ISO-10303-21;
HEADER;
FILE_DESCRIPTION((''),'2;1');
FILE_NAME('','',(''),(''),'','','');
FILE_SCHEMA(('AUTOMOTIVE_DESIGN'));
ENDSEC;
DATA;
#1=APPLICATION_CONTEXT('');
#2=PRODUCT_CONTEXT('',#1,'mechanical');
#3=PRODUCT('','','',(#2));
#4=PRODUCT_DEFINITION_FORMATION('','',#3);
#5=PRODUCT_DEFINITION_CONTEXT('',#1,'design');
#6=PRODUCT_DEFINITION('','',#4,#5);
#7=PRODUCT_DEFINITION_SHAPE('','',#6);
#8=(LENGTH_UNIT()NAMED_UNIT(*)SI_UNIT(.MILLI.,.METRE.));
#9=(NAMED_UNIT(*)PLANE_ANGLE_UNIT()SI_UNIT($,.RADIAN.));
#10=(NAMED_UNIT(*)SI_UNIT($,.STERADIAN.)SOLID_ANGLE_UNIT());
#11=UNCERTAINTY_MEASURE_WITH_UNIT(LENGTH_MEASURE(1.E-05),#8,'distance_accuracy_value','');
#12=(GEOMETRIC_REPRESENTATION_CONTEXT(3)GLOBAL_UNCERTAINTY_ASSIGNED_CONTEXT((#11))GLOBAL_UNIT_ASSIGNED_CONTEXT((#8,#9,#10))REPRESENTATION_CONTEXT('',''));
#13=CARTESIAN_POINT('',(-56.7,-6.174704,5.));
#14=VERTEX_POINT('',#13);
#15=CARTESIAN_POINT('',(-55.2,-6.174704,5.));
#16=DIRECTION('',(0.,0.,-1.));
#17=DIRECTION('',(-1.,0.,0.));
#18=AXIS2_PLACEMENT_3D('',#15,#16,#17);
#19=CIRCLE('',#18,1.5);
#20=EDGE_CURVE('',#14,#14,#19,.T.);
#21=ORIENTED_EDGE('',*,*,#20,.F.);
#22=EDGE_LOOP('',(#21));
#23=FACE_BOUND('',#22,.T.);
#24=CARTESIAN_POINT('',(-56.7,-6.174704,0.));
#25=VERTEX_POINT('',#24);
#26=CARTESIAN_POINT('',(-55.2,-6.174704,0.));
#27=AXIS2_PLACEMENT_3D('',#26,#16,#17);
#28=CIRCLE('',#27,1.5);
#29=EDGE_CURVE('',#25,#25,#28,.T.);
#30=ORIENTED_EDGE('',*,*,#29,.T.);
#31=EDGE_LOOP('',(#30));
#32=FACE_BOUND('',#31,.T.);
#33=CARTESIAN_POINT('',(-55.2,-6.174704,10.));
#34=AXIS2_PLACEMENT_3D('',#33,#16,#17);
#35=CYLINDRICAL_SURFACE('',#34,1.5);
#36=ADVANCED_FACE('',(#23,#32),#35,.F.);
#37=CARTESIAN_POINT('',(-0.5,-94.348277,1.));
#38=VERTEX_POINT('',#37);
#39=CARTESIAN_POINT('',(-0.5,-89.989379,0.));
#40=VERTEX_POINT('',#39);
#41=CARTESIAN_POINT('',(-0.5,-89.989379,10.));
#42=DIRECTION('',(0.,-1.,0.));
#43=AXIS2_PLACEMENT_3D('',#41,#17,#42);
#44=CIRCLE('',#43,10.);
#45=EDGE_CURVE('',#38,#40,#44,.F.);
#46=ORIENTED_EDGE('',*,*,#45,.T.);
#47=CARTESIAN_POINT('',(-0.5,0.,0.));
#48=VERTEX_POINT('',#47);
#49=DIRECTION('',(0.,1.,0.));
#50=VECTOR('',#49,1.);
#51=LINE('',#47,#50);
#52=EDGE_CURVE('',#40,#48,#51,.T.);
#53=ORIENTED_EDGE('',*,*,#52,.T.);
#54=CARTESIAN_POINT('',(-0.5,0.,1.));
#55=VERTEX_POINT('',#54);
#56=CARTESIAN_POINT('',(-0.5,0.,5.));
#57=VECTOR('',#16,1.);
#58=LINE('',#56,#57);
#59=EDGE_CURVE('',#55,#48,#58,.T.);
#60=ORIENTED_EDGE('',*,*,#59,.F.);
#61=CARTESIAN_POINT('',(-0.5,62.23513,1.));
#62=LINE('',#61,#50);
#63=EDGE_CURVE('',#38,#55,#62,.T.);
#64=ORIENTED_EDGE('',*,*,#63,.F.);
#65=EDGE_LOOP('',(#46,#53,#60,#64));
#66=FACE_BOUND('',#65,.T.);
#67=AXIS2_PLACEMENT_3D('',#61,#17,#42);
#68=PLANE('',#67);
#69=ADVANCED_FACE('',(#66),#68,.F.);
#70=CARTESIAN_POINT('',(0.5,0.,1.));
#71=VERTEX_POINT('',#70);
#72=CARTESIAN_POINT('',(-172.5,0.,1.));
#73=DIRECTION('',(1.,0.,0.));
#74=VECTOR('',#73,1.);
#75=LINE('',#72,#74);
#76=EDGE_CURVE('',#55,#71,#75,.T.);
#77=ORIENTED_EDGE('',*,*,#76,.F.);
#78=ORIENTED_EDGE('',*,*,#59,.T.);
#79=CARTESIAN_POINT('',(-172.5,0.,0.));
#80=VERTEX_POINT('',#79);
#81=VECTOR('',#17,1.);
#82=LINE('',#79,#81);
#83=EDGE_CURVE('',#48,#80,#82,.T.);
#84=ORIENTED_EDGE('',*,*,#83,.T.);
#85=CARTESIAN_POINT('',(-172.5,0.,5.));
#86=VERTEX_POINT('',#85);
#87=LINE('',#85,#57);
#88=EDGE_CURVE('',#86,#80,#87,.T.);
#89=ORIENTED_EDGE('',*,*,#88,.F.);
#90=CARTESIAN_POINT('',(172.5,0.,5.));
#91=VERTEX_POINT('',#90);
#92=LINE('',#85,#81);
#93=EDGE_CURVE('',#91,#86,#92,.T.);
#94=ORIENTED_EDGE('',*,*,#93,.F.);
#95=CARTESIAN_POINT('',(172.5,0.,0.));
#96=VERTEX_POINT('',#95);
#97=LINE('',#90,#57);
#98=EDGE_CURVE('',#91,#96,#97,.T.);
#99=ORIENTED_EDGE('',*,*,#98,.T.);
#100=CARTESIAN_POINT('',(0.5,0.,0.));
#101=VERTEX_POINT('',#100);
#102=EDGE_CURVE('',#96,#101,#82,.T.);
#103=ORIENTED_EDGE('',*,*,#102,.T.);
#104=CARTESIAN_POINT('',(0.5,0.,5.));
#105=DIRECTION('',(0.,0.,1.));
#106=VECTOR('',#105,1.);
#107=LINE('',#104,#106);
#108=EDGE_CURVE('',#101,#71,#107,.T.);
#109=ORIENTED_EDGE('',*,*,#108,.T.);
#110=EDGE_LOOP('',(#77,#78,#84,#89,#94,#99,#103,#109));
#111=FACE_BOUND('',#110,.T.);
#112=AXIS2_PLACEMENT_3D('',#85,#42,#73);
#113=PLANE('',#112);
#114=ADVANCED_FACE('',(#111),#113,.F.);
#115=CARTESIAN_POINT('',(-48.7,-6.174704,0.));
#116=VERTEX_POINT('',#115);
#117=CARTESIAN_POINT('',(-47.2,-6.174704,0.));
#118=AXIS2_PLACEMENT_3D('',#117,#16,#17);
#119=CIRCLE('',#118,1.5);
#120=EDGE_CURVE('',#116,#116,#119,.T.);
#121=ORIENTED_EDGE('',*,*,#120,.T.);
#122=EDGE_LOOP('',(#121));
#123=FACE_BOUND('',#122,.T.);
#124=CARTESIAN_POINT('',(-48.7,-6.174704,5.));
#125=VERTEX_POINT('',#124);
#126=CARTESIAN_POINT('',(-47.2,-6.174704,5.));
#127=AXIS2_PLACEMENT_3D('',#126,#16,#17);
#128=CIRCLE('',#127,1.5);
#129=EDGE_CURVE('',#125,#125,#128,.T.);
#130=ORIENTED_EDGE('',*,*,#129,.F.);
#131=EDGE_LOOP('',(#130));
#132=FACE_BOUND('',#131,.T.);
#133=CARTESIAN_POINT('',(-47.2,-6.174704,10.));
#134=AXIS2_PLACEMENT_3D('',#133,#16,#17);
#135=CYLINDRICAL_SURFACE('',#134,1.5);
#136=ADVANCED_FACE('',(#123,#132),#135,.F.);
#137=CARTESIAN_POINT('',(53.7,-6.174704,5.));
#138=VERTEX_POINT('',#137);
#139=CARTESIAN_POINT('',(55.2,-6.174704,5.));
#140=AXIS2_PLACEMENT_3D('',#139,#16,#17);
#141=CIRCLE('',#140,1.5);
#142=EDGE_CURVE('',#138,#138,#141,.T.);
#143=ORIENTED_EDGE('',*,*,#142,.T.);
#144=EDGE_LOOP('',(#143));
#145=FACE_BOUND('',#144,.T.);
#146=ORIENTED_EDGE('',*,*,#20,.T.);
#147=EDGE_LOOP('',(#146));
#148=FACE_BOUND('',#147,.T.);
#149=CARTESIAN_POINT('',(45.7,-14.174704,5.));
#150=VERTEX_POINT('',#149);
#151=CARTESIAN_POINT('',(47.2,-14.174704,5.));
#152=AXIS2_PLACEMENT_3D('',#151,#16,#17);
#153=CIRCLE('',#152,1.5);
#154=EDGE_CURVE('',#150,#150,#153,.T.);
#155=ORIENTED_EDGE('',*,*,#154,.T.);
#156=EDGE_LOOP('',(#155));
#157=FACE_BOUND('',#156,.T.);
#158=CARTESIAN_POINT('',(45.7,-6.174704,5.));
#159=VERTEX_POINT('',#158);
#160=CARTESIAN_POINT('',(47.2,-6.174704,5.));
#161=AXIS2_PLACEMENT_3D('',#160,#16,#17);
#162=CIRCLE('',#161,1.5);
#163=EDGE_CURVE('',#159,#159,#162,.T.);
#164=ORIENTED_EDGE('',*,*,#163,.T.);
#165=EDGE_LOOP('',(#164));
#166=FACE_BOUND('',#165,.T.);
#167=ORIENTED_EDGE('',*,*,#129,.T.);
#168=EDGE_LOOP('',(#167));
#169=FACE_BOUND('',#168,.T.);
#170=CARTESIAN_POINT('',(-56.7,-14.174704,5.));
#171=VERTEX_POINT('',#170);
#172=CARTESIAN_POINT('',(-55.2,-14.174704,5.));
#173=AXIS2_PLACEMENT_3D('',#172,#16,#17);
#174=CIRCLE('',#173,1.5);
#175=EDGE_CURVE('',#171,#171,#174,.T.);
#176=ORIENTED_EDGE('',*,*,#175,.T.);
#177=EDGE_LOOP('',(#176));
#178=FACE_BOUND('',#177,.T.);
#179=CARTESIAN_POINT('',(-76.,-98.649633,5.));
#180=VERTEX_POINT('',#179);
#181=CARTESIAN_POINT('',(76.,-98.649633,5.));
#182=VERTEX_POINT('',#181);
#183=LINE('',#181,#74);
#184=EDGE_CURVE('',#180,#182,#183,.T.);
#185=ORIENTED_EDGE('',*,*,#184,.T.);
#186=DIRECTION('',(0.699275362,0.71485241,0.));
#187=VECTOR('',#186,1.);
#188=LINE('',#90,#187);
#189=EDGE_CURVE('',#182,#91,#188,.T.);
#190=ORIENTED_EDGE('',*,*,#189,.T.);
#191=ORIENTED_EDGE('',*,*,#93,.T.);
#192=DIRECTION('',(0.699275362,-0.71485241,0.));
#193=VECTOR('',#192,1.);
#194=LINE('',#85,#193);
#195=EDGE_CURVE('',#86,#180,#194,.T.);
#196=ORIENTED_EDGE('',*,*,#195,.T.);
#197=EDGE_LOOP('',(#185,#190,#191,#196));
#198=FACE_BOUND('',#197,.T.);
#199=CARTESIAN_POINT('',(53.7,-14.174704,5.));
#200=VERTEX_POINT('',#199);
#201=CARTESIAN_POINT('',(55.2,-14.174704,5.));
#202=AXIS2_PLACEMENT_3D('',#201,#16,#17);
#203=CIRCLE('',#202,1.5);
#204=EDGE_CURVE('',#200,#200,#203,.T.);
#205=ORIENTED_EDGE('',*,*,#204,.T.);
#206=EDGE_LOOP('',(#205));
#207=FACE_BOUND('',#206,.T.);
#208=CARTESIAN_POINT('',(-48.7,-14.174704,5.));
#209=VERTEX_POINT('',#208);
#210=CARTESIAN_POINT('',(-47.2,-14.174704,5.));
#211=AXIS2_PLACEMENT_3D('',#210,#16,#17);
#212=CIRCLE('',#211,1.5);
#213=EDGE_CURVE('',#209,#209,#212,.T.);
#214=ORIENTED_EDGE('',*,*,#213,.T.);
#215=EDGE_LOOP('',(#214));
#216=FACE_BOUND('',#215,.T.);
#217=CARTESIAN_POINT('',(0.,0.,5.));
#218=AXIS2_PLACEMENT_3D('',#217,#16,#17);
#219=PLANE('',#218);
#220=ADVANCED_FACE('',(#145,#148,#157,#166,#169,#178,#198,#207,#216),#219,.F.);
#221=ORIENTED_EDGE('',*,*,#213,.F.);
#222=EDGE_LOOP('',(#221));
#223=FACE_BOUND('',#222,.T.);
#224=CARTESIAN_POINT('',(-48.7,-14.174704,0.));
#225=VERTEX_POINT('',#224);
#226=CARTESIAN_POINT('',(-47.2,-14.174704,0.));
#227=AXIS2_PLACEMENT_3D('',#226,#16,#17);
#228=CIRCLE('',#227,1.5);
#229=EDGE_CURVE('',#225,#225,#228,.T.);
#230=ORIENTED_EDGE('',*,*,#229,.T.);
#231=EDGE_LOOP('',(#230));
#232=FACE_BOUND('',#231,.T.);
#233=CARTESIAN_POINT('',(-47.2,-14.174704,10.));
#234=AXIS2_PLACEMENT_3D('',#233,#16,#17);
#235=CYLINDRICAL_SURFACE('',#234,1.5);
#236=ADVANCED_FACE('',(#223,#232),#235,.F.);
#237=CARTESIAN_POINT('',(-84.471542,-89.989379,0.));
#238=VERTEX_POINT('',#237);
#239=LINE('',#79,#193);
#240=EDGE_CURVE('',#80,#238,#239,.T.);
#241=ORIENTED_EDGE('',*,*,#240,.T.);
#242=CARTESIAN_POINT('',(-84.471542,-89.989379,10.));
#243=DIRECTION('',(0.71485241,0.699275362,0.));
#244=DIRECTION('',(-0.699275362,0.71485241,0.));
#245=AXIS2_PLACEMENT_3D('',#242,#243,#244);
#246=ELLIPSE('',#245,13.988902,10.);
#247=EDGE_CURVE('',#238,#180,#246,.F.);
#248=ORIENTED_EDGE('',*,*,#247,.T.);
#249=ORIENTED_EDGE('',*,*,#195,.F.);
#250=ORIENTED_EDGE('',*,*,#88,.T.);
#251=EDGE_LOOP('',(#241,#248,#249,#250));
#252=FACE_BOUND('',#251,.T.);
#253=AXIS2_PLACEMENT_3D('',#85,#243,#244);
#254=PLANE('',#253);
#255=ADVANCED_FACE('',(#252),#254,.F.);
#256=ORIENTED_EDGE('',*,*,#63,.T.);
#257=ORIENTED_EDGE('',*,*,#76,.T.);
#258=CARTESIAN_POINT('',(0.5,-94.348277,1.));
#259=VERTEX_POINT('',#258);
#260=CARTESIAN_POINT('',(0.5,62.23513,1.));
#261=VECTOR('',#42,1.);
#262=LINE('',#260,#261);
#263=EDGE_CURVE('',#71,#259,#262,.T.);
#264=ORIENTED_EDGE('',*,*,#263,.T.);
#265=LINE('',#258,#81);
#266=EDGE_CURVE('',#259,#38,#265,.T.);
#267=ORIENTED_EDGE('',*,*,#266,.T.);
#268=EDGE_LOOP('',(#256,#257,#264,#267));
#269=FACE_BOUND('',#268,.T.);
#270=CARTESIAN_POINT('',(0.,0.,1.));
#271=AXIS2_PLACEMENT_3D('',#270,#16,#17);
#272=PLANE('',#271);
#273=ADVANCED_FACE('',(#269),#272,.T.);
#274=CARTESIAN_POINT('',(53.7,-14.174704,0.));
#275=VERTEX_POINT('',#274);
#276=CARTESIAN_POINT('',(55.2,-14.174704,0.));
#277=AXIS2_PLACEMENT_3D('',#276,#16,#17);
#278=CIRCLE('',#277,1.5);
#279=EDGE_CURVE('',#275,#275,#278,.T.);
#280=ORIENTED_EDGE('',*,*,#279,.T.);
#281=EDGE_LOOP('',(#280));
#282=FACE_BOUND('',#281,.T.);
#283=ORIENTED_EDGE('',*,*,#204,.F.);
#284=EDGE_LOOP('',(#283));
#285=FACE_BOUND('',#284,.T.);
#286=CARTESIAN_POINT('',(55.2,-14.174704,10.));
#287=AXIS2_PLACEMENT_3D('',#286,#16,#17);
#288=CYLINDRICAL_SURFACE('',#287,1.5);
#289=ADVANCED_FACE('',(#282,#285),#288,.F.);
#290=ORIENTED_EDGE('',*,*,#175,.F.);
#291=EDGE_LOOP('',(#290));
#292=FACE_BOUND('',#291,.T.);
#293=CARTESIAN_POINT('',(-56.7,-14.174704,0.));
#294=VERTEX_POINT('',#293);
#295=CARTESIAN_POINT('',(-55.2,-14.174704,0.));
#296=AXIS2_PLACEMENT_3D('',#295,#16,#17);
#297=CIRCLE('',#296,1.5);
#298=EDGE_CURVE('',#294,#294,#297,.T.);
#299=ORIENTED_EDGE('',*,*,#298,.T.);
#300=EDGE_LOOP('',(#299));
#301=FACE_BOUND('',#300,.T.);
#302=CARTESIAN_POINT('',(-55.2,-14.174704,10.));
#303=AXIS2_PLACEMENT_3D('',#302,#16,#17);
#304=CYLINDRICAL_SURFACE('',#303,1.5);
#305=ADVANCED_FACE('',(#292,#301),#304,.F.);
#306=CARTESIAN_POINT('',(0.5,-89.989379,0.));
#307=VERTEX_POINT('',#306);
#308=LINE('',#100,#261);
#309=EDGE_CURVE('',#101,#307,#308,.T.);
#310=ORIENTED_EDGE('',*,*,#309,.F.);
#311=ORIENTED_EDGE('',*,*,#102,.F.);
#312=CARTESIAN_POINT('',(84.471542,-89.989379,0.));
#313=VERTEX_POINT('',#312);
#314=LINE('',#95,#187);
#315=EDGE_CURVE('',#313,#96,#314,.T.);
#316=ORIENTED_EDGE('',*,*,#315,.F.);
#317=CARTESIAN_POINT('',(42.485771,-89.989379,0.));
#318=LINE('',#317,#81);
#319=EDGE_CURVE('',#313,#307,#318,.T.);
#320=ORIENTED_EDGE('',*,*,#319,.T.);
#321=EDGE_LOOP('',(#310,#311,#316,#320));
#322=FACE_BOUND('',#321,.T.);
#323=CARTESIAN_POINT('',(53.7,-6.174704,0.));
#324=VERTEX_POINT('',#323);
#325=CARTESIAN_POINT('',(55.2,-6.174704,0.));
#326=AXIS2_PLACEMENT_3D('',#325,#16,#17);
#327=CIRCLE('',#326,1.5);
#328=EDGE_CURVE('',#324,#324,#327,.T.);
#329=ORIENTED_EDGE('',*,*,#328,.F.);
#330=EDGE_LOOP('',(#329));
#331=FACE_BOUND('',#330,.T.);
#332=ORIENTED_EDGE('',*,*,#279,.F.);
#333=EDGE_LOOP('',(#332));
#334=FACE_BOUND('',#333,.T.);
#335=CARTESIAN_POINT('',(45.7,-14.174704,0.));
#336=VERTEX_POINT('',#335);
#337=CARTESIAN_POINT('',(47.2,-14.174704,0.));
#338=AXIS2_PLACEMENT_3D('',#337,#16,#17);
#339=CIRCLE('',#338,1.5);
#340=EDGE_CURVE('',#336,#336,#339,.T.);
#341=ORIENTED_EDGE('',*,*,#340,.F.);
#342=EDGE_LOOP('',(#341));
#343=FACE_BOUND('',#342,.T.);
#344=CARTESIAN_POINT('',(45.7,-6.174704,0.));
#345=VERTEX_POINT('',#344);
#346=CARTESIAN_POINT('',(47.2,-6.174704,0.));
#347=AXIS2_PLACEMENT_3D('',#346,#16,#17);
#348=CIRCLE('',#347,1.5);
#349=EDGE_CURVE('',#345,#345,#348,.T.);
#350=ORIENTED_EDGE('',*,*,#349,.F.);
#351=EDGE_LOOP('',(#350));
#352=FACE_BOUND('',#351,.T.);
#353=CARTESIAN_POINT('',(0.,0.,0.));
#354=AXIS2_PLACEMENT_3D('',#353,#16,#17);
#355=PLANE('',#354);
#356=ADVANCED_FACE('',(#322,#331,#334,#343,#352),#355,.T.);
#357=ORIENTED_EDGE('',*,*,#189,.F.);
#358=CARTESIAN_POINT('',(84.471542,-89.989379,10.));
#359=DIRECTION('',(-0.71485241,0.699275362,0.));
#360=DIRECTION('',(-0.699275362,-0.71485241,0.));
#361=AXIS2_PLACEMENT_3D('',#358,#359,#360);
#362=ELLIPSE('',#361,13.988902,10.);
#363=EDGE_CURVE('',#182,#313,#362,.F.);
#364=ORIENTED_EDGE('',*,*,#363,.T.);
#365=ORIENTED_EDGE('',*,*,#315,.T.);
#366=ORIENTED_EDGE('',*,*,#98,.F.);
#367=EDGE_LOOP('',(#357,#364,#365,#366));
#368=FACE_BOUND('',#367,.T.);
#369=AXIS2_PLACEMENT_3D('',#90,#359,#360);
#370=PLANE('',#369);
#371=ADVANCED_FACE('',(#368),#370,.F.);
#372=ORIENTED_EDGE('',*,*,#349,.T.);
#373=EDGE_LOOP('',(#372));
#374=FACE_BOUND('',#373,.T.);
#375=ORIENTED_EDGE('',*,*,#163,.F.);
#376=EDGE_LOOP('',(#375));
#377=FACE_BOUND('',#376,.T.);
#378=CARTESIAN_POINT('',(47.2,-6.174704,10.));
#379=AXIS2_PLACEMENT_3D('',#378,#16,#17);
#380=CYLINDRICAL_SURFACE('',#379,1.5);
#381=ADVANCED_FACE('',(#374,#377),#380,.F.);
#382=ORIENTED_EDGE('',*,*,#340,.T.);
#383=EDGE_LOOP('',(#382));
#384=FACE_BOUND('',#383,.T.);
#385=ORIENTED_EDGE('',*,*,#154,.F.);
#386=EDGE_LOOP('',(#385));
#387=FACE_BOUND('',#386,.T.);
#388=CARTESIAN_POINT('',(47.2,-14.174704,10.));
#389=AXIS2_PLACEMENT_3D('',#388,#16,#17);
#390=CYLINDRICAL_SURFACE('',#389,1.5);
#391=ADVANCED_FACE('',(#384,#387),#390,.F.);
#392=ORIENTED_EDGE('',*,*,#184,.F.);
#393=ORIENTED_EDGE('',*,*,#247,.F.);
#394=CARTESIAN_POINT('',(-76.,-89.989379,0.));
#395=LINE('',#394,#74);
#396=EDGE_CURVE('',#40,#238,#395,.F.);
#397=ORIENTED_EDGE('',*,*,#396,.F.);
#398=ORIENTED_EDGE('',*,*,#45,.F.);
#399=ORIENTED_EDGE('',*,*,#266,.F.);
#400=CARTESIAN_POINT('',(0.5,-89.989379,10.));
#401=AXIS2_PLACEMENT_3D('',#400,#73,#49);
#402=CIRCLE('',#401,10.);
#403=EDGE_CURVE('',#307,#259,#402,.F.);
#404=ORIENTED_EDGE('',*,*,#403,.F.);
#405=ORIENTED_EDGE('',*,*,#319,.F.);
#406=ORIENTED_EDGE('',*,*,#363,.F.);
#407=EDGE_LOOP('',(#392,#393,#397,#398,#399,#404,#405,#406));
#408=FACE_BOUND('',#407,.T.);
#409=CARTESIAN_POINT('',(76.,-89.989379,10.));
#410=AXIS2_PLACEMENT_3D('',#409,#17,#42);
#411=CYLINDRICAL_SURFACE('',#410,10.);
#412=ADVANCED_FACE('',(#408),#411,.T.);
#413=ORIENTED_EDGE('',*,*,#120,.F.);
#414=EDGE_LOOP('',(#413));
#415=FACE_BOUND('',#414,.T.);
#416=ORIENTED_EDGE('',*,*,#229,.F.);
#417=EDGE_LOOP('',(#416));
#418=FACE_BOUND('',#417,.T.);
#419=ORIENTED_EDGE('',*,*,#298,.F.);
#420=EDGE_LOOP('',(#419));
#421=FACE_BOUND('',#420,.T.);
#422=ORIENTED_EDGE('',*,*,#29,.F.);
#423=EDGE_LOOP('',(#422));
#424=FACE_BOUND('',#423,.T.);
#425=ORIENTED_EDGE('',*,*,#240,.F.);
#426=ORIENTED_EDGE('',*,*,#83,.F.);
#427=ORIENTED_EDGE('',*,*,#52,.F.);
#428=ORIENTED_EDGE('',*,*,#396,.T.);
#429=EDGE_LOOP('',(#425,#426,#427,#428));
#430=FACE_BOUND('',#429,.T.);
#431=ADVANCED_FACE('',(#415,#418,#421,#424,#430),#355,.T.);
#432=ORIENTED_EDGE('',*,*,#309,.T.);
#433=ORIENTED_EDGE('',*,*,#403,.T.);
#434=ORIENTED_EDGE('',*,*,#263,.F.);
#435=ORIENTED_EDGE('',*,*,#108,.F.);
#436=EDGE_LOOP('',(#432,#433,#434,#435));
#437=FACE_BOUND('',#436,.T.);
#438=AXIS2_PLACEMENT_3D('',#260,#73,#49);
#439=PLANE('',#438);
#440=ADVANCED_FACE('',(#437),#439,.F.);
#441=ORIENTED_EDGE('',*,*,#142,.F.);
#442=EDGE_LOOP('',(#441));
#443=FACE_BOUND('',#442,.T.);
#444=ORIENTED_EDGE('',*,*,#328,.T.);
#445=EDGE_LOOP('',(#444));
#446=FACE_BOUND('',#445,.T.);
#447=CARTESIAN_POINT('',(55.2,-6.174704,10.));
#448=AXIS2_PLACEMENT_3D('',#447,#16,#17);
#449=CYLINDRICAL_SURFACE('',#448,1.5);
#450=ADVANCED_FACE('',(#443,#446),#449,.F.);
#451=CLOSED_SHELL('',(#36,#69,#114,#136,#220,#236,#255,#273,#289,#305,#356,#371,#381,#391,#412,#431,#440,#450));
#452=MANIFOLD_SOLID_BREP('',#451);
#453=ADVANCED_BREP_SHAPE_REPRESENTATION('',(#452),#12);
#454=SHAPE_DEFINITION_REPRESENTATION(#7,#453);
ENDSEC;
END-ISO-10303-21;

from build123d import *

# Parameters (mm, degrees)
EXTRUDE_1_DEPTH     = 5
SKETCH_3_W          = 1
SKETCH_3_H          = 224.141744844
CUT_EXTRUDE_2_DEPTH = 1
FILLET_1_R          = 10
SKETCH_7_R          = 1.5
CUT_EXTRUDE_3_DEPTH = 10


with BuildPart() as part:
    # 草图1 → 凸台-拉伸1 (new body)
    with BuildSketch(Plane.XY):
        Polygon((-172.5, 0), (172.5, 0), (76, -98.649632539), (-76, -98.649632539), align=None)
    extrude(amount=EXTRUDE_1_DEPTH)

    # 草图3 → 切除-拉伸2 (cut)
    with BuildSketch(Plane(origin=(0, 0, 0), x_dir=(-1, 0, 0), z_dir=(0, 0, -1))):
        with Locations((0, -49.835742657)):
            Rectangle(SKETCH_3_W, SKETCH_3_H)
    extrude(amount=-CUT_EXTRUDE_2_DEPTH, mode=Mode.SUBTRACT)

    # 圆角1
    # the kernel refuses this fillet: 10 mm, written as the material it takes off along each edge
    with BuildSketch(Plane(origin=(97.650635095, -98.649632539, 0), x_dir=(0, 1, 0), z_dir=(-1, 0, 0)), Plane(origin=(21.150635095, -98.649632539, 0), x_dir=(0, 1, 0), z_dir=(-1, 0, 0))) as fillet_1_piece_1:
        with BuildLine():
            CenterArc((8.660254038, -10), FILLET_1_R, 90, 60)
            Line((0, -5), (0, 0))
            Line((0, 0), (8.660254038, 0))
        make_face()
    extrude(amount=118.801270189, mode=Mode.SUBTRACT)

    # 草图7 → 切除-拉伸3 (cut)
    with BuildSketch(Plane(origin=(0, 0, 0), x_dir=(-1, 0, 0), z_dir=(0, 0, -1))):
        with Locations((55.2, -14.174704167)):
            Circle(SKETCH_7_R)
        with Locations((47.2, -14.174704167)):
            Circle(SKETCH_7_R)
        with Locations((47.2, -6.174704167)):
            Circle(SKETCH_7_R)
        with Locations((55.2, -6.174704167)):
            Circle(SKETCH_7_R)
        with Locations((-55.2, -6.174704167)):
            Circle(SKETCH_7_R)
        with Locations((-55.2, -14.174704167)):
            Circle(SKETCH_7_R)
        with Locations((-47.2, -14.174704167)):
            Circle(SKETCH_7_R)
        with Locations((-47.2, -6.174704167)):
            Circle(SKETCH_7_R)
    extrude(amount=-CUT_EXTRUDE_3_DEPTH, mode=Mode.SUBTRACT)


solid = part.part
